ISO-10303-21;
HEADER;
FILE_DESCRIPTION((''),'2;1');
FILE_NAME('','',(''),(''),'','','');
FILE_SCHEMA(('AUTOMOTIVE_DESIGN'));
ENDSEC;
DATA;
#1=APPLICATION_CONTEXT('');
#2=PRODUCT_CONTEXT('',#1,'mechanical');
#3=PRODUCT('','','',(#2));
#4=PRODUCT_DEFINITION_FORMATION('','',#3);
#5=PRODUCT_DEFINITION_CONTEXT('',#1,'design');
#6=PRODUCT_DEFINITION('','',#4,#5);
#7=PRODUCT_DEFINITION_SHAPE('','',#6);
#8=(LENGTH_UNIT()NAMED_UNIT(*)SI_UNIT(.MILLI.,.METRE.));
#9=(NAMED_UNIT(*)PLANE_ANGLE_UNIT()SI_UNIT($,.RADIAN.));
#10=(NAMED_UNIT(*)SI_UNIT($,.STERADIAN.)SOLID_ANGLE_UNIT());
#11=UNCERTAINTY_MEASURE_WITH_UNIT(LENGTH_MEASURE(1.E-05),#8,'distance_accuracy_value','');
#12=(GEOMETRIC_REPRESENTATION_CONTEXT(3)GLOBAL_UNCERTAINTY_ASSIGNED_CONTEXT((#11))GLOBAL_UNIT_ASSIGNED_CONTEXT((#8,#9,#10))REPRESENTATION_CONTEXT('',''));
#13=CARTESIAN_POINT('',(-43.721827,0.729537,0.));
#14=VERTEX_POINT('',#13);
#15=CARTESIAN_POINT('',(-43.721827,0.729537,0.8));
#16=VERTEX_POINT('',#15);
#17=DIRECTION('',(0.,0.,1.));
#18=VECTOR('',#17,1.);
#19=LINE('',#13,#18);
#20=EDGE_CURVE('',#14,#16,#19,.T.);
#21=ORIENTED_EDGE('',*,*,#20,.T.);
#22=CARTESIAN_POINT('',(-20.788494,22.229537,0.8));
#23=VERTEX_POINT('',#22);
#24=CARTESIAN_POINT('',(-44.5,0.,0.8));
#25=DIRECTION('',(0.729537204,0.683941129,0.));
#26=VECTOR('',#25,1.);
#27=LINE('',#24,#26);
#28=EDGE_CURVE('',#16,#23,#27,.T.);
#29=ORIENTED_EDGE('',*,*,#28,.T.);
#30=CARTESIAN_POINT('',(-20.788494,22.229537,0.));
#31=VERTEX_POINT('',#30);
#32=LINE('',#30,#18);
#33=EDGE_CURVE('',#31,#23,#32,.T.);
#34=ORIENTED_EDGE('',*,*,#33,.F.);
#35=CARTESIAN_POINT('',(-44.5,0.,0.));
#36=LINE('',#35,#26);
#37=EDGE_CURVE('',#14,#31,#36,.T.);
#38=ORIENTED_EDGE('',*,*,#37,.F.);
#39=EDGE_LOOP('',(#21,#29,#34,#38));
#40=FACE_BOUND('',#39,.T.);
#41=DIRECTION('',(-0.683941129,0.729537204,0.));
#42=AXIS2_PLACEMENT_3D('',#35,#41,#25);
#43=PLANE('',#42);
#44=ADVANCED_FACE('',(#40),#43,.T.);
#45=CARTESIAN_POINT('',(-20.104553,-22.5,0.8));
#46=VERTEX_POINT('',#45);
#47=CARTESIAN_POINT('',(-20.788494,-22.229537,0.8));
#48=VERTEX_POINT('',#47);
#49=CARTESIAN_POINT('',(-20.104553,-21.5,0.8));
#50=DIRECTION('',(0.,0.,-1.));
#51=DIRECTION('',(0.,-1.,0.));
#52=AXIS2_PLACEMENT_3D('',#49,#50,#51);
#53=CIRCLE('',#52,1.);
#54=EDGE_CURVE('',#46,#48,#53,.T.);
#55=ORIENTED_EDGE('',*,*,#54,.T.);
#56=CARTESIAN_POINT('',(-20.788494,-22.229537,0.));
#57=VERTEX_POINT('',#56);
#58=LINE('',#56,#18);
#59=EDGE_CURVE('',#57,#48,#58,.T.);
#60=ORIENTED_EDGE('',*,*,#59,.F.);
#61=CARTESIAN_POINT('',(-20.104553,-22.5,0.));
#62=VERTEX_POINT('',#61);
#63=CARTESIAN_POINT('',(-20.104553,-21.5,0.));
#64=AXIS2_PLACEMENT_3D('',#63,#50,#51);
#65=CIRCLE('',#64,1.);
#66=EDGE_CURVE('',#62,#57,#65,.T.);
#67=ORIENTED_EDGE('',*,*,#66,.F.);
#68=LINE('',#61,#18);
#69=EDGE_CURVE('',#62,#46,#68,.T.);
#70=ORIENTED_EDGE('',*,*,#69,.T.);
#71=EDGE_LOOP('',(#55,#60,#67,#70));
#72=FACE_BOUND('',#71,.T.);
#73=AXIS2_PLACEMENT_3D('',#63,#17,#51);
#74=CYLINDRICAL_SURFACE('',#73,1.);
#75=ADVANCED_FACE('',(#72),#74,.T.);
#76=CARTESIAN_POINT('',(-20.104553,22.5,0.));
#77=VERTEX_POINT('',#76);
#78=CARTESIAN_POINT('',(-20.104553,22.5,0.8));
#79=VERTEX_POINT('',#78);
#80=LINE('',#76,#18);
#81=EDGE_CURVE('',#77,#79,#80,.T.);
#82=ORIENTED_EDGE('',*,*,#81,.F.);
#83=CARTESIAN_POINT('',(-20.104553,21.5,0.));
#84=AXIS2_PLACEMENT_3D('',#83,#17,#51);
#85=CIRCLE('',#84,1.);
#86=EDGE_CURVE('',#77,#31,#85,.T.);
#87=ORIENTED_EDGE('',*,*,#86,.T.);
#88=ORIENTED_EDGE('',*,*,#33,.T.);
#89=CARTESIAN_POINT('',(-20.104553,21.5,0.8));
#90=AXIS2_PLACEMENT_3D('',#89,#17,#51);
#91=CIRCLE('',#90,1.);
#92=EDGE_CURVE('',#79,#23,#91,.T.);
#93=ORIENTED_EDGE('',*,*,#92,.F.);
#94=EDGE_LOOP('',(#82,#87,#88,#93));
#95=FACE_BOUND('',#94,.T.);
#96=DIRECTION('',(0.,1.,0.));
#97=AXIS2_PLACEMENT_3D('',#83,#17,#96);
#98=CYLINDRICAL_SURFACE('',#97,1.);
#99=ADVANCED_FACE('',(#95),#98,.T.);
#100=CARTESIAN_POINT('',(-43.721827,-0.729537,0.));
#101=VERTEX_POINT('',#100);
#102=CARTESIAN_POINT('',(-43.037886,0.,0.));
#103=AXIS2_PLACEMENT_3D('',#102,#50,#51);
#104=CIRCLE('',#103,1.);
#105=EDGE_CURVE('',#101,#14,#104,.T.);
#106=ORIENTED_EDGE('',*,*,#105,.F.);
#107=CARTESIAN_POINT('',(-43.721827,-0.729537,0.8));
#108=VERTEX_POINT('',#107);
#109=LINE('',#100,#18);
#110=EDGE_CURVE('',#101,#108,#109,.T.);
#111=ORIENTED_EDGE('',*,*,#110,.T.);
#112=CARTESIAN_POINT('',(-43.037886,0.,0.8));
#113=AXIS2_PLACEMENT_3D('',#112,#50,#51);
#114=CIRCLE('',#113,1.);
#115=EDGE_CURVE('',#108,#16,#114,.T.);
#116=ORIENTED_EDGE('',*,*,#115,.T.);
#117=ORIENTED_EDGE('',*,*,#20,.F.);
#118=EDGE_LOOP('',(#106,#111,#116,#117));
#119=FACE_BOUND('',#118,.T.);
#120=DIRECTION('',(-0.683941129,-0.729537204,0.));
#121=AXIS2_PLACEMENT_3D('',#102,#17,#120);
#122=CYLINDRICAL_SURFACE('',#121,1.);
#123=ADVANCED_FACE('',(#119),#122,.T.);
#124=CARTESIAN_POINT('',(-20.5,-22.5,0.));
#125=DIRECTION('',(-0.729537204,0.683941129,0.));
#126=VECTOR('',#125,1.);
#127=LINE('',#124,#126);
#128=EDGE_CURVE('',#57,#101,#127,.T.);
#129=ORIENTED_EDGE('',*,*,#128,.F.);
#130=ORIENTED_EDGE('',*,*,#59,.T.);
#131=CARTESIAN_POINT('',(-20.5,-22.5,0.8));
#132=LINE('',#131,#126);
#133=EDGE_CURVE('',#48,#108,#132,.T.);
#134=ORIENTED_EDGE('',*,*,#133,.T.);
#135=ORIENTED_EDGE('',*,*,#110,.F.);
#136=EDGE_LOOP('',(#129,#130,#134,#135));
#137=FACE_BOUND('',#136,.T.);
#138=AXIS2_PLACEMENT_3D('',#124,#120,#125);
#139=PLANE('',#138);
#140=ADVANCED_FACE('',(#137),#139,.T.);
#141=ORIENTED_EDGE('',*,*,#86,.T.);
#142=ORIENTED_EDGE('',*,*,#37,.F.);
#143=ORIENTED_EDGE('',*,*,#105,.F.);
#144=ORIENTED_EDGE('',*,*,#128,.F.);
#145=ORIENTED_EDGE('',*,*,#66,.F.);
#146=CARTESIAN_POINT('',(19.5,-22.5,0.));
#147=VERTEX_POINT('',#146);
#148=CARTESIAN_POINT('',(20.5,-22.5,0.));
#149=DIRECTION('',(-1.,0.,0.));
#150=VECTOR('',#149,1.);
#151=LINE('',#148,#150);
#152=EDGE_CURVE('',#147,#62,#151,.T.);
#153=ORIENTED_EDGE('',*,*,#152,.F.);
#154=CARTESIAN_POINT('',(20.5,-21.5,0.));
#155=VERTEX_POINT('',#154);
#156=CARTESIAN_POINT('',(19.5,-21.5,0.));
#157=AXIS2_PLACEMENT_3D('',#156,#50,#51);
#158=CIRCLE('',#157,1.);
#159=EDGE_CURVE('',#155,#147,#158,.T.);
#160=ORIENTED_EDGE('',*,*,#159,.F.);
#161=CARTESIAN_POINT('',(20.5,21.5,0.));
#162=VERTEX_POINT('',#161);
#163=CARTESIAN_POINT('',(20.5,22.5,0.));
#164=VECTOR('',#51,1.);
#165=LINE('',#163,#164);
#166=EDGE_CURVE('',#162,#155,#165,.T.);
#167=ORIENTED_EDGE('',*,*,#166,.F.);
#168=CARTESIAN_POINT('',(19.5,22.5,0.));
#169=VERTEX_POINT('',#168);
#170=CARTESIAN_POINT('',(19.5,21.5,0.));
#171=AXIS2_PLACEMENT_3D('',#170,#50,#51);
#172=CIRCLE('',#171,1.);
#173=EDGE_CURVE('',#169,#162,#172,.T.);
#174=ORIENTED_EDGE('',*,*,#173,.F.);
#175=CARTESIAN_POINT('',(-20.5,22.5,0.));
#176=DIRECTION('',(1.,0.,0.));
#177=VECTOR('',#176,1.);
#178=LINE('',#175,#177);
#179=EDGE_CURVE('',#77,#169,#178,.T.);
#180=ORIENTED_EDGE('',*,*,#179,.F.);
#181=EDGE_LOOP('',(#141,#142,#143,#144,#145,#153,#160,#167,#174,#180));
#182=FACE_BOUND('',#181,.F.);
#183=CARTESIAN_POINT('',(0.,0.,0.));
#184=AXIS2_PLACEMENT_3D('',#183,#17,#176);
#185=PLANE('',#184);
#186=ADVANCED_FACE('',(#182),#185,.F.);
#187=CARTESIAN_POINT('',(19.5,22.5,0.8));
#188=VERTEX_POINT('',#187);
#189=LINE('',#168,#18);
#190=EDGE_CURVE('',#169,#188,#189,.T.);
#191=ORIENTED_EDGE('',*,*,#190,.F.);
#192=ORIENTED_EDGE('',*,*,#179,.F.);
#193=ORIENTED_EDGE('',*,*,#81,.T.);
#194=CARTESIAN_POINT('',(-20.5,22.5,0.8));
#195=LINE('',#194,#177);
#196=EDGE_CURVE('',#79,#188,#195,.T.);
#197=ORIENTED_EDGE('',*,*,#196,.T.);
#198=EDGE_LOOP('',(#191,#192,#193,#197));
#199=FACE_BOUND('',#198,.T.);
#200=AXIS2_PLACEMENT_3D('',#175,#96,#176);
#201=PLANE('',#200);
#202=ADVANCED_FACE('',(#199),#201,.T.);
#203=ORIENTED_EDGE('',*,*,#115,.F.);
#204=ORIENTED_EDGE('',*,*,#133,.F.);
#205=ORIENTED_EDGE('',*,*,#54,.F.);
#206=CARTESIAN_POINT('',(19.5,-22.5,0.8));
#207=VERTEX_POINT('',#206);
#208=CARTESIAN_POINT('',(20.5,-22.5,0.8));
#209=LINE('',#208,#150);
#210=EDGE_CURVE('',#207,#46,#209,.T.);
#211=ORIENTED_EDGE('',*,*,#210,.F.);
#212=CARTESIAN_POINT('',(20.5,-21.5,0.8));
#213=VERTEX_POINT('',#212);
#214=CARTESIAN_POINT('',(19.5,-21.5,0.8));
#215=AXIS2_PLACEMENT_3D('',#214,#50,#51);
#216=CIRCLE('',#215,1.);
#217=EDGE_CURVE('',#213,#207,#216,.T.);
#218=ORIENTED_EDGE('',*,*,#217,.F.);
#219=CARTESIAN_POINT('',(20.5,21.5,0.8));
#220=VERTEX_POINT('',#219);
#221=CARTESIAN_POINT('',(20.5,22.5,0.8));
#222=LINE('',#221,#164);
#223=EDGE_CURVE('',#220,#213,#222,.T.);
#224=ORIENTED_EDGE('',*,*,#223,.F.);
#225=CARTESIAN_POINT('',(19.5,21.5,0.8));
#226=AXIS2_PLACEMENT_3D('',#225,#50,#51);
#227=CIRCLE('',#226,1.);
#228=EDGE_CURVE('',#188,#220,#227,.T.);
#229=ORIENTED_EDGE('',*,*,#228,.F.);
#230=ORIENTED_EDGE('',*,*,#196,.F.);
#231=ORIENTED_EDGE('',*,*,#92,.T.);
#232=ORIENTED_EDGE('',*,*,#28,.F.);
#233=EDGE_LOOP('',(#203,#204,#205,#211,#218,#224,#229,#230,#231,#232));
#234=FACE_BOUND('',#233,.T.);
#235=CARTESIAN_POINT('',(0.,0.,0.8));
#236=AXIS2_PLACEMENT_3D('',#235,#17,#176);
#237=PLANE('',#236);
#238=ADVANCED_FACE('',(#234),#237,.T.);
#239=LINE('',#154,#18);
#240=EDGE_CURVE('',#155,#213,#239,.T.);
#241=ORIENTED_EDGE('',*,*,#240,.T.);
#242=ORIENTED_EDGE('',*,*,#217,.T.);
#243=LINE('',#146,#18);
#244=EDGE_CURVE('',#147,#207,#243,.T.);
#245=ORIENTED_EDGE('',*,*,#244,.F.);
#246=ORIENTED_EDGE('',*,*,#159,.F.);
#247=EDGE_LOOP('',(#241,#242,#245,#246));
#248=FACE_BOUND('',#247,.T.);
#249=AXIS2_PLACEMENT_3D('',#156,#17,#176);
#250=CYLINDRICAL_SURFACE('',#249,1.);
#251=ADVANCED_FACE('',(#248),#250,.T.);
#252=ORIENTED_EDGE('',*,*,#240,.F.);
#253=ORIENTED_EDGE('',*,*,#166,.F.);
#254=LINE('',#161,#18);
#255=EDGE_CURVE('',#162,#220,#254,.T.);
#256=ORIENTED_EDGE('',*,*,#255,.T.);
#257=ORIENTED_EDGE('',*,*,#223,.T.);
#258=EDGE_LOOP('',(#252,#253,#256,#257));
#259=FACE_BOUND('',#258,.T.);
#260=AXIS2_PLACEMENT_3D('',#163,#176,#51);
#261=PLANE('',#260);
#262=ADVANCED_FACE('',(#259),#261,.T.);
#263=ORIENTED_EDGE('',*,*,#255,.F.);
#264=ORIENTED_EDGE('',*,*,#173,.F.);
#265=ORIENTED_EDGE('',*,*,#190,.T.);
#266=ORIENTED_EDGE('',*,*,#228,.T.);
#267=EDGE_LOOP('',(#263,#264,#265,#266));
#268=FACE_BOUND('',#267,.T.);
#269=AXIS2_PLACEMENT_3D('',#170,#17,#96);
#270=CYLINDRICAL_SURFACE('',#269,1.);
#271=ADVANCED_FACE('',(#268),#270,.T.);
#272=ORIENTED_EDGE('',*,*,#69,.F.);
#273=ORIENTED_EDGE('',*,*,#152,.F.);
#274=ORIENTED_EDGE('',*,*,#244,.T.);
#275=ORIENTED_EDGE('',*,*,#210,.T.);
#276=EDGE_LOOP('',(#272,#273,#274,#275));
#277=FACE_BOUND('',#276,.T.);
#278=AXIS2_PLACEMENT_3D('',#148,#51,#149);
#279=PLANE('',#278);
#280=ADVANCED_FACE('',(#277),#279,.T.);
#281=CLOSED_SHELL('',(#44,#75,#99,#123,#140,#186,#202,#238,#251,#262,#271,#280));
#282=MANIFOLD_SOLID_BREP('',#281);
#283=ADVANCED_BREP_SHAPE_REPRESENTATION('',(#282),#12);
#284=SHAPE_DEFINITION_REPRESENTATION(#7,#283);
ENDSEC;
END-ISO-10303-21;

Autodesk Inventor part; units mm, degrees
ref_plane "YZ Plane" through (0, 0, 0) normal (1, 0, 0) x (0, 1, 0)
ref_plane "XZ Plane" through (0, 0, 0) normal (0, 1, 0) x (-1, 0, 0)
ref_plane "XY Plane" through (0, 0, 0) normal (0, 0, 1) x (1, 0, 0)
sketch "Sketch1" plane through (0, 0, 0) normal (0, 0, 1) x (1, 0, 0)
  line L0 (-20.5, 22.5) -> (20.5, 22.5)
  line L1 (20.5, 22.5) -> (20.5, -22.5)
  line L2 (20.5, -22.5) -> (-20.5, -22.5)
  line L3 (-20.5, -22.5) -> (-20.5, 22.5) construction
  line L4 (-20.5, 22.5) -> (20.5, -22.5) construction
  line L5 (-20.5, -22.5) -> (-44.5, 0)
  line L6 (-44.5, 0) -> (-20.5, 22.5)
  point P0 (0, 0)
  point P1 (0, 0)
  point P2 (20.5, 0)
  dimension "d0" = 41
  dimension "d1" = 45
  dimension "d4" = 65
extrude "Plate1" add sketch "Sketch1" along normal blind 0.8
fillet "Corner Round2" radius 1 5 edges at (-20.5, -22.5, 0.4) (-44.5, 0, 0.4) (-20.5, 22.5, 0.4) (20.5, -22.5, 0.4) (20.5, 22.5, 0.4)
equation "\"d2\" = Thickness"
equation "\"BendReliefWidth\" = Thickness"
equation "\"BendReliefDepth\" = 0.5 * Thickness"
equation "\"CornerReliefSize\" = 4 * Thickness"
equation "\"MinimumRemnant\" = 2 * Thickness"
equation "\"TransitionRadius\" = BendRadius"
equation "\"JacobiRadiusSize\" = BendRadius"
equation "\"GapSize\" = Thickness"
equation "\"Thickness\" = 0.8"
equation "\"BendRadius\" = 2.75"
properties part number "DS-B-502 CAPhouse" material "Stainless Steel"
